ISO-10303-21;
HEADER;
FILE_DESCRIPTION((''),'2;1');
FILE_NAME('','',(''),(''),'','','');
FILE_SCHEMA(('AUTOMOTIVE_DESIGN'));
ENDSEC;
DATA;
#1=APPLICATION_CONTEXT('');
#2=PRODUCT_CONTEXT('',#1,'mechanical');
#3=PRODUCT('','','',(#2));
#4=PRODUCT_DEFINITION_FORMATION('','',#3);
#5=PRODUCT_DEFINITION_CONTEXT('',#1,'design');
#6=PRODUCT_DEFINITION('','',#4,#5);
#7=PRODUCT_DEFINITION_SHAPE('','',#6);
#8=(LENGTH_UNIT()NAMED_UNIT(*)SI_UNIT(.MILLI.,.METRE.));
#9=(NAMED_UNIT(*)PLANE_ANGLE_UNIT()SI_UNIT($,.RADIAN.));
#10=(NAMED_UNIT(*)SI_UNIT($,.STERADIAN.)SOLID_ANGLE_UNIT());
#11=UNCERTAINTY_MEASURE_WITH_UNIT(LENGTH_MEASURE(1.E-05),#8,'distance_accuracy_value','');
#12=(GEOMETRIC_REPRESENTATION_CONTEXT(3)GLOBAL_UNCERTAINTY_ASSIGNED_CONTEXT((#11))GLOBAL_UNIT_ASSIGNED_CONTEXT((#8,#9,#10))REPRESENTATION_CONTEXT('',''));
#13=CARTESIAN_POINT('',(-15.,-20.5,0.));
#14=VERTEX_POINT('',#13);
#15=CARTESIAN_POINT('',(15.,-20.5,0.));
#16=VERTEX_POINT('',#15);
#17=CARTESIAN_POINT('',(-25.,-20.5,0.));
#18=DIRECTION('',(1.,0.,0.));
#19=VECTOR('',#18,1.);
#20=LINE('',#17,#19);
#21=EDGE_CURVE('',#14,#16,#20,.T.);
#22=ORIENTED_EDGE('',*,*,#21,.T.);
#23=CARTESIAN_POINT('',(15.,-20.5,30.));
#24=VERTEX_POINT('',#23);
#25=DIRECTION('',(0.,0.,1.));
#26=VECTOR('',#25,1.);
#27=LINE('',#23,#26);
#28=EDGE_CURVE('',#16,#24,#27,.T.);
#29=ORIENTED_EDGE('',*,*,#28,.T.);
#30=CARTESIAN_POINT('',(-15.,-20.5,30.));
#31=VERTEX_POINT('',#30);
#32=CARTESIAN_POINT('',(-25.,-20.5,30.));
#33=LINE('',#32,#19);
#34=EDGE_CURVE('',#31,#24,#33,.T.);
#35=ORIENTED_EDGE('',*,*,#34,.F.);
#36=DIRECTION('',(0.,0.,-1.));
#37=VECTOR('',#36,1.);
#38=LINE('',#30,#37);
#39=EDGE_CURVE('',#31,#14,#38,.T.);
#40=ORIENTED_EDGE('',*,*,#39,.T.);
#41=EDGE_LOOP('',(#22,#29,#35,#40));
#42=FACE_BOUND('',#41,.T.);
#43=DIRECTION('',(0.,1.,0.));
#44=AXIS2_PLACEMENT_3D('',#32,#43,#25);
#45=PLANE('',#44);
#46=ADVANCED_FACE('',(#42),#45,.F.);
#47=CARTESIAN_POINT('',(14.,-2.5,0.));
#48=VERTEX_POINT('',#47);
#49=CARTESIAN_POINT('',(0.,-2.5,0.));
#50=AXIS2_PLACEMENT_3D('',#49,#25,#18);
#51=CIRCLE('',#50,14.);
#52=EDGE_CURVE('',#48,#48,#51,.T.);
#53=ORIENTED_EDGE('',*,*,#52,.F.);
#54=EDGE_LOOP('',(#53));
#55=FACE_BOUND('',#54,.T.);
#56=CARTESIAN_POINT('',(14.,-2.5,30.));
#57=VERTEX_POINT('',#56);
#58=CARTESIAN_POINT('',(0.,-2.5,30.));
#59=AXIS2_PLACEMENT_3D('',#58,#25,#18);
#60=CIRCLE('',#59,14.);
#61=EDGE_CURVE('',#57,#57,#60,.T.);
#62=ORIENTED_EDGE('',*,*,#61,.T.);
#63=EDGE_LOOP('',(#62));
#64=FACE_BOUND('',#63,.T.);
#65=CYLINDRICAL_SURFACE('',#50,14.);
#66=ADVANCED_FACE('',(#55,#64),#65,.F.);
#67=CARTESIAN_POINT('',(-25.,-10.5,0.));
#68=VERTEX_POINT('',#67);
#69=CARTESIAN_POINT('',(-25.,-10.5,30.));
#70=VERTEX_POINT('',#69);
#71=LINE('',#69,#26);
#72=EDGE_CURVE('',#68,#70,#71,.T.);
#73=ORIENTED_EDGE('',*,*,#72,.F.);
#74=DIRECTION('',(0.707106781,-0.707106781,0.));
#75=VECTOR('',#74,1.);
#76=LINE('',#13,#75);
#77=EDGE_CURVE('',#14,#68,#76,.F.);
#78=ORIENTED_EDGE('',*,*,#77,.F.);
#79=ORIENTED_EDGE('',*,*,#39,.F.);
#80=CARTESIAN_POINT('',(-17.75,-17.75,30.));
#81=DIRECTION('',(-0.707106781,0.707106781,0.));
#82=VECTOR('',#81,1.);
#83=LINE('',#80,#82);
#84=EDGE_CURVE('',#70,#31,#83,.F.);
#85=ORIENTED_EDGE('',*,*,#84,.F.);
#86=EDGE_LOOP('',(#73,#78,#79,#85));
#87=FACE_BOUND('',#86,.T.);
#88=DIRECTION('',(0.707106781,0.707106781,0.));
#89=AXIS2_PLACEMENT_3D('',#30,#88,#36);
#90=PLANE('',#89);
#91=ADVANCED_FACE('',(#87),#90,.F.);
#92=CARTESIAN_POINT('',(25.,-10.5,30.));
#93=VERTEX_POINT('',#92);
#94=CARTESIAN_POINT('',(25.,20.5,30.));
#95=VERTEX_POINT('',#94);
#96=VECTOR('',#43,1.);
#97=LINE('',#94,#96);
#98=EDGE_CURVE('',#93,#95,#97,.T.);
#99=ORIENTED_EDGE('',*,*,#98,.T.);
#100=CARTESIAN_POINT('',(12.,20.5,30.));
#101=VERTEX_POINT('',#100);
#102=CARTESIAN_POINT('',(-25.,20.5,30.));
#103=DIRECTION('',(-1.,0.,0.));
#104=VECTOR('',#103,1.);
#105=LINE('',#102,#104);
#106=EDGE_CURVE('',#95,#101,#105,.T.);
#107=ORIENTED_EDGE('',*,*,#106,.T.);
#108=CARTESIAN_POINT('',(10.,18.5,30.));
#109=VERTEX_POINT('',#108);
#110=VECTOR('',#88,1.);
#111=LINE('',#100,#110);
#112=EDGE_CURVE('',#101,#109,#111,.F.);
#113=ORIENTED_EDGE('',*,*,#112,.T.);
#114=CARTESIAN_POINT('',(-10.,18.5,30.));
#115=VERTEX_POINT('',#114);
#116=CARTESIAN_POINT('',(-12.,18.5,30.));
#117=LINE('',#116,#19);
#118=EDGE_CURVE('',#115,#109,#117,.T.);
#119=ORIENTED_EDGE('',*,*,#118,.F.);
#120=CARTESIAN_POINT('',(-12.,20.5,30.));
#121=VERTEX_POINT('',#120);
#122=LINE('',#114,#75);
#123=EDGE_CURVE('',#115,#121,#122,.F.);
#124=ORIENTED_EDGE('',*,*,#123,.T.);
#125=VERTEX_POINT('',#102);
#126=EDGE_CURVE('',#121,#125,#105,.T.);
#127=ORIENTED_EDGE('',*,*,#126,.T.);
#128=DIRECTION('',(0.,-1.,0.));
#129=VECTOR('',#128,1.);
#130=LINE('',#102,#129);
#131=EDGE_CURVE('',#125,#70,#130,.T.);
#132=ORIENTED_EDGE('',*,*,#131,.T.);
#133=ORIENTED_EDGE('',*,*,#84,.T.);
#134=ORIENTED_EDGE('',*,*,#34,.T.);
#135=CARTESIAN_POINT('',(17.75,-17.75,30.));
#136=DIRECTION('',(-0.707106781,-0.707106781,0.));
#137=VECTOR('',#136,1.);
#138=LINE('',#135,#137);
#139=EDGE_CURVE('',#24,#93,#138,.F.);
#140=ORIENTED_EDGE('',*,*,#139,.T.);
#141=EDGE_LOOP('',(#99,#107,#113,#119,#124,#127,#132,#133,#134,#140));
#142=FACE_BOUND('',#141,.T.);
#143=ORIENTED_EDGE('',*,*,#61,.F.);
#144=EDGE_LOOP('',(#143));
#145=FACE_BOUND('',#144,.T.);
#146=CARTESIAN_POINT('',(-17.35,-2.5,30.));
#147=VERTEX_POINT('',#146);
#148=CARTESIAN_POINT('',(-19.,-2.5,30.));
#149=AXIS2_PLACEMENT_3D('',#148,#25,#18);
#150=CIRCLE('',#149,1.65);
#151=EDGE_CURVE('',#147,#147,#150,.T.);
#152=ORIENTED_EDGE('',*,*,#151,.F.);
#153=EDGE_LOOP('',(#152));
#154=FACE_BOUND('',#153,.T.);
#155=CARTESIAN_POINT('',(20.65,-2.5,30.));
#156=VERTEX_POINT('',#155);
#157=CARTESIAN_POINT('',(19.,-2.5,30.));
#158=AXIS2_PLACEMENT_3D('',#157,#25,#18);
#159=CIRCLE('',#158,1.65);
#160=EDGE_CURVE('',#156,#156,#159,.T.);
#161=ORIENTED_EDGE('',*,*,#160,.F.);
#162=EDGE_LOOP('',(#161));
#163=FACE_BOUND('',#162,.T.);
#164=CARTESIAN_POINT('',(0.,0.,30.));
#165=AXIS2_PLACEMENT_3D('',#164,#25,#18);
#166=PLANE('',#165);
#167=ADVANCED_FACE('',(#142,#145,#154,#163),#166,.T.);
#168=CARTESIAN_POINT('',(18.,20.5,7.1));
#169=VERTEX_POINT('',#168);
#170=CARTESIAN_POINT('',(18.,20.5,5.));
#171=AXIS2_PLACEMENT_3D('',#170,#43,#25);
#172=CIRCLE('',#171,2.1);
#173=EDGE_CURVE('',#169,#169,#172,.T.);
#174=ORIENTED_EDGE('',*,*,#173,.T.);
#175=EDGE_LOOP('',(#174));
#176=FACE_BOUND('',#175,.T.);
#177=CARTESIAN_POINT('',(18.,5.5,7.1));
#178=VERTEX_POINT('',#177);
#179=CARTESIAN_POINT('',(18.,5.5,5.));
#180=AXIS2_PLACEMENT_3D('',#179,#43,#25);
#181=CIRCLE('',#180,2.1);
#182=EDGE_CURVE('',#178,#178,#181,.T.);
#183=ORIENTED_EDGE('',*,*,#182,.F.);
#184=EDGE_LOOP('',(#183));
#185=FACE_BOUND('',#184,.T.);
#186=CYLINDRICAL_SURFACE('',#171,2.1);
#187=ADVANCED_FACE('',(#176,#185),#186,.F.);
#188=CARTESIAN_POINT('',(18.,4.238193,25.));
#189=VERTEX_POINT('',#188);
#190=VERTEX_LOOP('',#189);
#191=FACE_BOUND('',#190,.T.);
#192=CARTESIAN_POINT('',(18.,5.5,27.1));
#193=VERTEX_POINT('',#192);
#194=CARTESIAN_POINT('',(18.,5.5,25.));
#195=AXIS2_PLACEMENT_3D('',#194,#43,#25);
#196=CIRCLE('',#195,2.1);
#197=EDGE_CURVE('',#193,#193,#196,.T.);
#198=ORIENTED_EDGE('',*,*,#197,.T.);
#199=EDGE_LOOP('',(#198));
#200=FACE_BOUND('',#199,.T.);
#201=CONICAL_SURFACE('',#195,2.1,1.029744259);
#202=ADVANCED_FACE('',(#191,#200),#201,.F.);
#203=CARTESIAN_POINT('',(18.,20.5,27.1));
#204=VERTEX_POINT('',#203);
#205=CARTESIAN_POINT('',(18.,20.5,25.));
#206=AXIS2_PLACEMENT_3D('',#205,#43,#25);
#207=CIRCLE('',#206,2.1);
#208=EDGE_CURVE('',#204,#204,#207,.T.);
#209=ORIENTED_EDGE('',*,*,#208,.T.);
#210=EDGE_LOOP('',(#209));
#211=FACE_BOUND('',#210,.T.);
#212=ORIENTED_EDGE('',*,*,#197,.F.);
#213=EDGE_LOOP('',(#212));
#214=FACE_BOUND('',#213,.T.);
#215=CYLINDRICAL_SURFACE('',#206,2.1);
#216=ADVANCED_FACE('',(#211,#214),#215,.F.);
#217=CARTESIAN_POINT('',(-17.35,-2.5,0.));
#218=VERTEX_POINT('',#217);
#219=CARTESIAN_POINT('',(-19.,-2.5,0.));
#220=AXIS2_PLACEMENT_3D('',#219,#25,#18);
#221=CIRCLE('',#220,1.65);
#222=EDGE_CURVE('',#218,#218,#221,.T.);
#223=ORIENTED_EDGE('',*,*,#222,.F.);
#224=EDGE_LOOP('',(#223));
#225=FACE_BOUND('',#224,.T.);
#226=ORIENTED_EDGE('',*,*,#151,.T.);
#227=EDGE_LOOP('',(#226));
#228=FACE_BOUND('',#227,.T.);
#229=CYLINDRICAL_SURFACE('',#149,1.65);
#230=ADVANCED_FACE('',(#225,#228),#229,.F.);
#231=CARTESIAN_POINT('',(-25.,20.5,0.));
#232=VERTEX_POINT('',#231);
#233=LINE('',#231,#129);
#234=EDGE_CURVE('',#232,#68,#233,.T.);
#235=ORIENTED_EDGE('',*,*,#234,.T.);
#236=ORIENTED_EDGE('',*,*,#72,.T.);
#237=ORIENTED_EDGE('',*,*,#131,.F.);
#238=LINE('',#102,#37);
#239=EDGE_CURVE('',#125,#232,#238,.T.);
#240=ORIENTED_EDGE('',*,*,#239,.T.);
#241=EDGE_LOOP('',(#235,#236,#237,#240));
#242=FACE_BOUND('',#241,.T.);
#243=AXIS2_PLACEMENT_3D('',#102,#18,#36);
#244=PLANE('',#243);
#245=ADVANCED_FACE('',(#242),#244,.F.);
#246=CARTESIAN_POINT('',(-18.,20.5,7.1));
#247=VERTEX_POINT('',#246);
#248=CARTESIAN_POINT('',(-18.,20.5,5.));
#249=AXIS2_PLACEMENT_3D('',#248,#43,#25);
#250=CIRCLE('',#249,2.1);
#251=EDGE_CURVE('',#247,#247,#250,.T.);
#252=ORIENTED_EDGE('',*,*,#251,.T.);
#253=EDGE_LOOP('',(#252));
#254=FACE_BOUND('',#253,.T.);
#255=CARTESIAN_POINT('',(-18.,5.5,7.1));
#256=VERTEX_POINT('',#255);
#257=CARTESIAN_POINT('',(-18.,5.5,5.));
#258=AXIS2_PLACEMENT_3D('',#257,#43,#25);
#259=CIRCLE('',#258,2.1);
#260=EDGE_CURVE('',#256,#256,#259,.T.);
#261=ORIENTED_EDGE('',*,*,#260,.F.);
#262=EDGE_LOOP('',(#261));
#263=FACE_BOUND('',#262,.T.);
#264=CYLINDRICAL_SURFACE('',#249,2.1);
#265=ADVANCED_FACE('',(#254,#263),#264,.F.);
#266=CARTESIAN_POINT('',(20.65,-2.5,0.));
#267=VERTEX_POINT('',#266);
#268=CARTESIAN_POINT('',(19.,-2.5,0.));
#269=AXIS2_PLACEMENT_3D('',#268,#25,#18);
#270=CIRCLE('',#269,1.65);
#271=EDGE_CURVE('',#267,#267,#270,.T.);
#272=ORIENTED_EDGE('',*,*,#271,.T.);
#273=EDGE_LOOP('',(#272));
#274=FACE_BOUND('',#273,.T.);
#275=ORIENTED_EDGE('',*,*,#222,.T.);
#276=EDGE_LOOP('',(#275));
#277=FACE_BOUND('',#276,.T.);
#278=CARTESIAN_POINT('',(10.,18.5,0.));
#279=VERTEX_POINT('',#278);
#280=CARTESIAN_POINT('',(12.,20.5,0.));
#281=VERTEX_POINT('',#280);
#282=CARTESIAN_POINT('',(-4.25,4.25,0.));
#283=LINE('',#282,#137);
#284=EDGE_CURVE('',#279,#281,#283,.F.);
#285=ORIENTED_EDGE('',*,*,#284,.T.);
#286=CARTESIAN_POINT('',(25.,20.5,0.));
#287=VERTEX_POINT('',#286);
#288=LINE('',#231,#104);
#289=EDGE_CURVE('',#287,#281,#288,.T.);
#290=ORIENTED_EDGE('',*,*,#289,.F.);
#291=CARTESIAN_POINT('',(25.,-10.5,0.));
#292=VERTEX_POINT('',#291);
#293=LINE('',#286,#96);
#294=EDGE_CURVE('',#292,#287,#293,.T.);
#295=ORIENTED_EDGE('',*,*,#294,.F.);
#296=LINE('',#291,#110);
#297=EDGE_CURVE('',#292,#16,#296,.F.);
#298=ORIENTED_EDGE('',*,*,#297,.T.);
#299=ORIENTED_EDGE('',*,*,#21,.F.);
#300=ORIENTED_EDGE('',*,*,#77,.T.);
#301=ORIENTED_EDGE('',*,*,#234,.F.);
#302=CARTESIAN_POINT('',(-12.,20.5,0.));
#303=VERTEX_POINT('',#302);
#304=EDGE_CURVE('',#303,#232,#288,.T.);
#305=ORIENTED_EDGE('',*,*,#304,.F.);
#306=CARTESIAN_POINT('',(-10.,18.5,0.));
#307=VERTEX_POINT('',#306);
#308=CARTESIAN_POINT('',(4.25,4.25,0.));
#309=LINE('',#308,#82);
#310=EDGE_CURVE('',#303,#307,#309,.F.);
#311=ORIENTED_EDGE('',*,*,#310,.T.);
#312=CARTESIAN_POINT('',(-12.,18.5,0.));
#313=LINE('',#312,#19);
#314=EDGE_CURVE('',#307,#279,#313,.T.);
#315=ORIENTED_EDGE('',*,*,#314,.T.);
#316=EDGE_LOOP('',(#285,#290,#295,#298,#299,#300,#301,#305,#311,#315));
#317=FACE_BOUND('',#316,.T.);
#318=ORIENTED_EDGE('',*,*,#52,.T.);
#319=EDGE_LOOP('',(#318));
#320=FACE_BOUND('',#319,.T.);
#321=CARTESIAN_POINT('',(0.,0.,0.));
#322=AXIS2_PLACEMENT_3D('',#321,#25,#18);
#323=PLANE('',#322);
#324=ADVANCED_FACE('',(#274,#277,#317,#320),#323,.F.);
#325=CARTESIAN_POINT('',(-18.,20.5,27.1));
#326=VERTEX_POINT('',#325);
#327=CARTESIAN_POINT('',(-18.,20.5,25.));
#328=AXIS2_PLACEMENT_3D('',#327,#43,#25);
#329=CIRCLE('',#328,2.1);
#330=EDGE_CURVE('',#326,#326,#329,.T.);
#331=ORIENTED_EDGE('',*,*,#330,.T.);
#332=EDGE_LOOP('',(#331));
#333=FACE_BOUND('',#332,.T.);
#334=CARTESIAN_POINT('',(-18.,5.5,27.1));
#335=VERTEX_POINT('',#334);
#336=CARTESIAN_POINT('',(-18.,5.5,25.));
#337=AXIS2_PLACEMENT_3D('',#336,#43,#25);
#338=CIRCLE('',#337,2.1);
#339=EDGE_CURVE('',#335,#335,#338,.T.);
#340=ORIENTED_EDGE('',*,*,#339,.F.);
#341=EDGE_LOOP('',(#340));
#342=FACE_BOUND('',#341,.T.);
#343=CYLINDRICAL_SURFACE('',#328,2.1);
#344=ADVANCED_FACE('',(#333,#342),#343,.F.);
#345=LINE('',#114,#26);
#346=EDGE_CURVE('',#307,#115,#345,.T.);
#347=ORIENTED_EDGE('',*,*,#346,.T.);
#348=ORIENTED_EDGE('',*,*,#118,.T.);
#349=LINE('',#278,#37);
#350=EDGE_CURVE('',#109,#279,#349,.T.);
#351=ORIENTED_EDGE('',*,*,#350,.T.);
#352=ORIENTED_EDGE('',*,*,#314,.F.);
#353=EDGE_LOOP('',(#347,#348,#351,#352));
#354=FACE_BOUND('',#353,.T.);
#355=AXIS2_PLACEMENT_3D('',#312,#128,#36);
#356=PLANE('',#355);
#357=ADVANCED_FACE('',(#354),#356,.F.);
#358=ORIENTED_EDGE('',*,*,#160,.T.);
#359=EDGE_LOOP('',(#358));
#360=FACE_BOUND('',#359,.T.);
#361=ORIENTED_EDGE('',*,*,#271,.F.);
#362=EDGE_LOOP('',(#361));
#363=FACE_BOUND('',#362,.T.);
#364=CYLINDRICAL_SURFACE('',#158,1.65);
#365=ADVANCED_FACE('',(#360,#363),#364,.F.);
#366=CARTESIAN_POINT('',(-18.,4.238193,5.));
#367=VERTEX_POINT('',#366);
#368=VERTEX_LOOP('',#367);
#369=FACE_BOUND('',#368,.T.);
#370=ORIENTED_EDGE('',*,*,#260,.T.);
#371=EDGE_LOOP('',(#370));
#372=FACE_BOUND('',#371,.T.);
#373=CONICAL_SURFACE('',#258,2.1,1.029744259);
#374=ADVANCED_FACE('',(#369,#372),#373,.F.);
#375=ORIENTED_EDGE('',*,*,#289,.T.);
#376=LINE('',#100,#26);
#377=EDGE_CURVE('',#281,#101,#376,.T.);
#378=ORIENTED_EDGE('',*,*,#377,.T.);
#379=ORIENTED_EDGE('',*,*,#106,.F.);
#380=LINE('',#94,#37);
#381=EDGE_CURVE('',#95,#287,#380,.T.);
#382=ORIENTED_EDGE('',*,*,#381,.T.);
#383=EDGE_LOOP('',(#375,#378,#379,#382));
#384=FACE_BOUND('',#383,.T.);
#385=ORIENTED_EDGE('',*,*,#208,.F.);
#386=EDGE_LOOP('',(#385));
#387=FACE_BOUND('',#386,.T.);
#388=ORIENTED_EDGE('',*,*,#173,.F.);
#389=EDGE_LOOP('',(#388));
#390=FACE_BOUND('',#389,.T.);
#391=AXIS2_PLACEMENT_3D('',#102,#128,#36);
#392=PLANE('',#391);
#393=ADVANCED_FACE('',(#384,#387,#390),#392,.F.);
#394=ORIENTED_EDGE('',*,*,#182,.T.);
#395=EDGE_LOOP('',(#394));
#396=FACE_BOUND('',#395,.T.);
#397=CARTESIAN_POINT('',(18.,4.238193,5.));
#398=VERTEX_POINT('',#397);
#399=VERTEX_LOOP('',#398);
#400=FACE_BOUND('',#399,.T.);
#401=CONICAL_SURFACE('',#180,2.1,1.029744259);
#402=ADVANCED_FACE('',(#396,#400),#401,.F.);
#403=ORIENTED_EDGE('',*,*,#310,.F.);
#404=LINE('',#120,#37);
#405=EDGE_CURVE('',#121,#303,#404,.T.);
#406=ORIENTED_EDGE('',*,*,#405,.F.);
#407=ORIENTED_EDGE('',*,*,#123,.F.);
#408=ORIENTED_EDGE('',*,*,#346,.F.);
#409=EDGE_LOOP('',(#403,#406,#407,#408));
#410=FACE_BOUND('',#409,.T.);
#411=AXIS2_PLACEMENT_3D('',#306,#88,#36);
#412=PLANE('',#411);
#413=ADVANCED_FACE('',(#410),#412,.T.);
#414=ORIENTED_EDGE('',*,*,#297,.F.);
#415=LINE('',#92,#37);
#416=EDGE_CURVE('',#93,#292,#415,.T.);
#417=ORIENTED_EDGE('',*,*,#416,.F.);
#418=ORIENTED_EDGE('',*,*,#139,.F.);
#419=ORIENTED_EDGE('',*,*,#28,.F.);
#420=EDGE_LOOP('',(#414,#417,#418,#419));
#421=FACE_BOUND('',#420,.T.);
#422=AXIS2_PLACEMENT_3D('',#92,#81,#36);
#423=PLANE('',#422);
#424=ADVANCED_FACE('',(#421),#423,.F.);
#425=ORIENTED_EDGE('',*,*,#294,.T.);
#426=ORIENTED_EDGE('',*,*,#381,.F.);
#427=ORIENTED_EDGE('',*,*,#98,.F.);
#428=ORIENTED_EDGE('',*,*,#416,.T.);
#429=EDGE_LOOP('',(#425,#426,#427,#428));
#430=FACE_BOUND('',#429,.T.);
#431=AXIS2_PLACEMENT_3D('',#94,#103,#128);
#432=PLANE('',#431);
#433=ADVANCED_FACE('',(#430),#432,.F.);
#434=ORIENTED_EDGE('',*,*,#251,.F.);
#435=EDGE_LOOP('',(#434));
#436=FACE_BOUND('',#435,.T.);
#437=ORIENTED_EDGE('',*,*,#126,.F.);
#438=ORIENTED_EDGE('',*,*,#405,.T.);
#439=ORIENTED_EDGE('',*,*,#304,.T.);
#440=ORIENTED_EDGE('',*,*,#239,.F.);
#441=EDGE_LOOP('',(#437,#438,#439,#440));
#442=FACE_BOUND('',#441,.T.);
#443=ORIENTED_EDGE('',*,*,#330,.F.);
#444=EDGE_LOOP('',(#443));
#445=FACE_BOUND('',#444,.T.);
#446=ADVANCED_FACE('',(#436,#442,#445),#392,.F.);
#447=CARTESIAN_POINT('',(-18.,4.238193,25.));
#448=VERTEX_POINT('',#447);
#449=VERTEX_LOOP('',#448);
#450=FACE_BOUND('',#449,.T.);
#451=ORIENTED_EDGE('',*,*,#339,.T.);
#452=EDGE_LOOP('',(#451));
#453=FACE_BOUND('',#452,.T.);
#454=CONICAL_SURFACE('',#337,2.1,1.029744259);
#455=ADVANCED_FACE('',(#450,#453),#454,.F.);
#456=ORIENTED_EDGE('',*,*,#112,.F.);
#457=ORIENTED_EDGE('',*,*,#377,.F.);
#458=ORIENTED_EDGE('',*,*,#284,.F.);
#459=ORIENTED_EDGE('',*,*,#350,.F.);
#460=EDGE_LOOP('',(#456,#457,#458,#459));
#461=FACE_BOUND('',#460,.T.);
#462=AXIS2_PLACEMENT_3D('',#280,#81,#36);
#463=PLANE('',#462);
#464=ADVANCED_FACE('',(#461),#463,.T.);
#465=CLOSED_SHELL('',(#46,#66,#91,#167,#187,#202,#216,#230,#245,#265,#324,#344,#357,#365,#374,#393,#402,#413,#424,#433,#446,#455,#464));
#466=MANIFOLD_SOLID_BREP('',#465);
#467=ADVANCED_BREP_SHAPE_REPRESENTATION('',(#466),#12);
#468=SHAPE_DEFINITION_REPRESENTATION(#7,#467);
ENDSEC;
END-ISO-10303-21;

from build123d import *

# Parameters (mm, degrees)
SKETCH1_W                   = 50
SKETCH1_H                   = 41
BOSS_EXTRUDE1_DEPTH         = 30
SKETCH8_R                   = 14
SKETCH8_W                   = 24
SKETCH8_H                   = 4
CUT_EXTRUDE1_DEPTH          = 45.10498838
TAP_DRILL_FOR_M4_TAP1_D     = 3.3
TAP_DRILL_FOR_M5_TAP2_D     = 4.2
TAP_DRILL_FOR_M5_TAP2_DEPTH = 15
TAP_DRILL_FOR_M5_TAP2_TIP   = 1.2618073
CHAMFER1_SIZE               = 2
CHAMFER2_SIZE               = 10


with BuildPart() as part:
    # Sketch1 → Boss-Extrude1 (new body)
    with BuildSketch(Plane.XY):
        Rectangle(SKETCH1_W, SKETCH1_H)
    extrude(amount=BOSS_EXTRUDE1_DEPTH)

    # Sketch8 → Cut-Extrude1 (cut, through all)
    with BuildSketch(Plane.XY.offset(30)):
        with Locations((0, -2.5)):
            Circle(SKETCH8_R)
        with Locations((0, 20.5)):
            Rectangle(SKETCH8_W, SKETCH8_H)
    extrude(amount=-CUT_EXTRUDE1_DEPTH, mode=Mode.SUBTRACT)

    # Tap Drill for M4 Tap1 (through all)
    with Locations(Plane.XY.offset(30)):
        with Locations((19, -2.5), (-19, -2.5)):
            Hole(TAP_DRILL_FOR_M4_TAP1_D / 2)

    # Tap Drill for M5 Tap2
    with Locations(Plane(origin=(0, 20.5, 0), x_dir=(1, 0, 0), z_dir=(0, 1, 0))):
        with Locations((-18, -25), (-18, -5), (18, -5), (18, -25)):
            Hole(TAP_DRILL_FOR_M5_TAP2_D / 2, depth=TAP_DRILL_FOR_M5_TAP2_DEPTH)
            with Locations((0, 0, -(TAP_DRILL_FOR_M5_TAP2_DEPTH + TAP_DRILL_FOR_M5_TAP2_TIP / 2))):  # 118° drill point
                Cone(0, TAP_DRILL_FOR_M5_TAP2_D / 2, TAP_DRILL_FOR_M5_TAP2_TIP, mode=Mode.SUBTRACT)

    # Chamfer1
    chamfer1_edges = [part.edges().sort_by_distance(p)[0] for p in [
        (12, 18.5, 15),
        (-12, 18.5, 15),
    ]]
    chamfer(chamfer1_edges, length=CHAMFER1_SIZE - 0.0001)  # a hair under: the kernel refuses the full size

    # Chamfer2
    chamfer2_edges = [part.edges().sort_by_distance(p)[0] for p in [
        (25, -20.5, 15),
        (-25, -20.5, 15),
    ]]
    chamfer(chamfer2_edges, length=CHAMFER2_SIZE)


solid = part.part
